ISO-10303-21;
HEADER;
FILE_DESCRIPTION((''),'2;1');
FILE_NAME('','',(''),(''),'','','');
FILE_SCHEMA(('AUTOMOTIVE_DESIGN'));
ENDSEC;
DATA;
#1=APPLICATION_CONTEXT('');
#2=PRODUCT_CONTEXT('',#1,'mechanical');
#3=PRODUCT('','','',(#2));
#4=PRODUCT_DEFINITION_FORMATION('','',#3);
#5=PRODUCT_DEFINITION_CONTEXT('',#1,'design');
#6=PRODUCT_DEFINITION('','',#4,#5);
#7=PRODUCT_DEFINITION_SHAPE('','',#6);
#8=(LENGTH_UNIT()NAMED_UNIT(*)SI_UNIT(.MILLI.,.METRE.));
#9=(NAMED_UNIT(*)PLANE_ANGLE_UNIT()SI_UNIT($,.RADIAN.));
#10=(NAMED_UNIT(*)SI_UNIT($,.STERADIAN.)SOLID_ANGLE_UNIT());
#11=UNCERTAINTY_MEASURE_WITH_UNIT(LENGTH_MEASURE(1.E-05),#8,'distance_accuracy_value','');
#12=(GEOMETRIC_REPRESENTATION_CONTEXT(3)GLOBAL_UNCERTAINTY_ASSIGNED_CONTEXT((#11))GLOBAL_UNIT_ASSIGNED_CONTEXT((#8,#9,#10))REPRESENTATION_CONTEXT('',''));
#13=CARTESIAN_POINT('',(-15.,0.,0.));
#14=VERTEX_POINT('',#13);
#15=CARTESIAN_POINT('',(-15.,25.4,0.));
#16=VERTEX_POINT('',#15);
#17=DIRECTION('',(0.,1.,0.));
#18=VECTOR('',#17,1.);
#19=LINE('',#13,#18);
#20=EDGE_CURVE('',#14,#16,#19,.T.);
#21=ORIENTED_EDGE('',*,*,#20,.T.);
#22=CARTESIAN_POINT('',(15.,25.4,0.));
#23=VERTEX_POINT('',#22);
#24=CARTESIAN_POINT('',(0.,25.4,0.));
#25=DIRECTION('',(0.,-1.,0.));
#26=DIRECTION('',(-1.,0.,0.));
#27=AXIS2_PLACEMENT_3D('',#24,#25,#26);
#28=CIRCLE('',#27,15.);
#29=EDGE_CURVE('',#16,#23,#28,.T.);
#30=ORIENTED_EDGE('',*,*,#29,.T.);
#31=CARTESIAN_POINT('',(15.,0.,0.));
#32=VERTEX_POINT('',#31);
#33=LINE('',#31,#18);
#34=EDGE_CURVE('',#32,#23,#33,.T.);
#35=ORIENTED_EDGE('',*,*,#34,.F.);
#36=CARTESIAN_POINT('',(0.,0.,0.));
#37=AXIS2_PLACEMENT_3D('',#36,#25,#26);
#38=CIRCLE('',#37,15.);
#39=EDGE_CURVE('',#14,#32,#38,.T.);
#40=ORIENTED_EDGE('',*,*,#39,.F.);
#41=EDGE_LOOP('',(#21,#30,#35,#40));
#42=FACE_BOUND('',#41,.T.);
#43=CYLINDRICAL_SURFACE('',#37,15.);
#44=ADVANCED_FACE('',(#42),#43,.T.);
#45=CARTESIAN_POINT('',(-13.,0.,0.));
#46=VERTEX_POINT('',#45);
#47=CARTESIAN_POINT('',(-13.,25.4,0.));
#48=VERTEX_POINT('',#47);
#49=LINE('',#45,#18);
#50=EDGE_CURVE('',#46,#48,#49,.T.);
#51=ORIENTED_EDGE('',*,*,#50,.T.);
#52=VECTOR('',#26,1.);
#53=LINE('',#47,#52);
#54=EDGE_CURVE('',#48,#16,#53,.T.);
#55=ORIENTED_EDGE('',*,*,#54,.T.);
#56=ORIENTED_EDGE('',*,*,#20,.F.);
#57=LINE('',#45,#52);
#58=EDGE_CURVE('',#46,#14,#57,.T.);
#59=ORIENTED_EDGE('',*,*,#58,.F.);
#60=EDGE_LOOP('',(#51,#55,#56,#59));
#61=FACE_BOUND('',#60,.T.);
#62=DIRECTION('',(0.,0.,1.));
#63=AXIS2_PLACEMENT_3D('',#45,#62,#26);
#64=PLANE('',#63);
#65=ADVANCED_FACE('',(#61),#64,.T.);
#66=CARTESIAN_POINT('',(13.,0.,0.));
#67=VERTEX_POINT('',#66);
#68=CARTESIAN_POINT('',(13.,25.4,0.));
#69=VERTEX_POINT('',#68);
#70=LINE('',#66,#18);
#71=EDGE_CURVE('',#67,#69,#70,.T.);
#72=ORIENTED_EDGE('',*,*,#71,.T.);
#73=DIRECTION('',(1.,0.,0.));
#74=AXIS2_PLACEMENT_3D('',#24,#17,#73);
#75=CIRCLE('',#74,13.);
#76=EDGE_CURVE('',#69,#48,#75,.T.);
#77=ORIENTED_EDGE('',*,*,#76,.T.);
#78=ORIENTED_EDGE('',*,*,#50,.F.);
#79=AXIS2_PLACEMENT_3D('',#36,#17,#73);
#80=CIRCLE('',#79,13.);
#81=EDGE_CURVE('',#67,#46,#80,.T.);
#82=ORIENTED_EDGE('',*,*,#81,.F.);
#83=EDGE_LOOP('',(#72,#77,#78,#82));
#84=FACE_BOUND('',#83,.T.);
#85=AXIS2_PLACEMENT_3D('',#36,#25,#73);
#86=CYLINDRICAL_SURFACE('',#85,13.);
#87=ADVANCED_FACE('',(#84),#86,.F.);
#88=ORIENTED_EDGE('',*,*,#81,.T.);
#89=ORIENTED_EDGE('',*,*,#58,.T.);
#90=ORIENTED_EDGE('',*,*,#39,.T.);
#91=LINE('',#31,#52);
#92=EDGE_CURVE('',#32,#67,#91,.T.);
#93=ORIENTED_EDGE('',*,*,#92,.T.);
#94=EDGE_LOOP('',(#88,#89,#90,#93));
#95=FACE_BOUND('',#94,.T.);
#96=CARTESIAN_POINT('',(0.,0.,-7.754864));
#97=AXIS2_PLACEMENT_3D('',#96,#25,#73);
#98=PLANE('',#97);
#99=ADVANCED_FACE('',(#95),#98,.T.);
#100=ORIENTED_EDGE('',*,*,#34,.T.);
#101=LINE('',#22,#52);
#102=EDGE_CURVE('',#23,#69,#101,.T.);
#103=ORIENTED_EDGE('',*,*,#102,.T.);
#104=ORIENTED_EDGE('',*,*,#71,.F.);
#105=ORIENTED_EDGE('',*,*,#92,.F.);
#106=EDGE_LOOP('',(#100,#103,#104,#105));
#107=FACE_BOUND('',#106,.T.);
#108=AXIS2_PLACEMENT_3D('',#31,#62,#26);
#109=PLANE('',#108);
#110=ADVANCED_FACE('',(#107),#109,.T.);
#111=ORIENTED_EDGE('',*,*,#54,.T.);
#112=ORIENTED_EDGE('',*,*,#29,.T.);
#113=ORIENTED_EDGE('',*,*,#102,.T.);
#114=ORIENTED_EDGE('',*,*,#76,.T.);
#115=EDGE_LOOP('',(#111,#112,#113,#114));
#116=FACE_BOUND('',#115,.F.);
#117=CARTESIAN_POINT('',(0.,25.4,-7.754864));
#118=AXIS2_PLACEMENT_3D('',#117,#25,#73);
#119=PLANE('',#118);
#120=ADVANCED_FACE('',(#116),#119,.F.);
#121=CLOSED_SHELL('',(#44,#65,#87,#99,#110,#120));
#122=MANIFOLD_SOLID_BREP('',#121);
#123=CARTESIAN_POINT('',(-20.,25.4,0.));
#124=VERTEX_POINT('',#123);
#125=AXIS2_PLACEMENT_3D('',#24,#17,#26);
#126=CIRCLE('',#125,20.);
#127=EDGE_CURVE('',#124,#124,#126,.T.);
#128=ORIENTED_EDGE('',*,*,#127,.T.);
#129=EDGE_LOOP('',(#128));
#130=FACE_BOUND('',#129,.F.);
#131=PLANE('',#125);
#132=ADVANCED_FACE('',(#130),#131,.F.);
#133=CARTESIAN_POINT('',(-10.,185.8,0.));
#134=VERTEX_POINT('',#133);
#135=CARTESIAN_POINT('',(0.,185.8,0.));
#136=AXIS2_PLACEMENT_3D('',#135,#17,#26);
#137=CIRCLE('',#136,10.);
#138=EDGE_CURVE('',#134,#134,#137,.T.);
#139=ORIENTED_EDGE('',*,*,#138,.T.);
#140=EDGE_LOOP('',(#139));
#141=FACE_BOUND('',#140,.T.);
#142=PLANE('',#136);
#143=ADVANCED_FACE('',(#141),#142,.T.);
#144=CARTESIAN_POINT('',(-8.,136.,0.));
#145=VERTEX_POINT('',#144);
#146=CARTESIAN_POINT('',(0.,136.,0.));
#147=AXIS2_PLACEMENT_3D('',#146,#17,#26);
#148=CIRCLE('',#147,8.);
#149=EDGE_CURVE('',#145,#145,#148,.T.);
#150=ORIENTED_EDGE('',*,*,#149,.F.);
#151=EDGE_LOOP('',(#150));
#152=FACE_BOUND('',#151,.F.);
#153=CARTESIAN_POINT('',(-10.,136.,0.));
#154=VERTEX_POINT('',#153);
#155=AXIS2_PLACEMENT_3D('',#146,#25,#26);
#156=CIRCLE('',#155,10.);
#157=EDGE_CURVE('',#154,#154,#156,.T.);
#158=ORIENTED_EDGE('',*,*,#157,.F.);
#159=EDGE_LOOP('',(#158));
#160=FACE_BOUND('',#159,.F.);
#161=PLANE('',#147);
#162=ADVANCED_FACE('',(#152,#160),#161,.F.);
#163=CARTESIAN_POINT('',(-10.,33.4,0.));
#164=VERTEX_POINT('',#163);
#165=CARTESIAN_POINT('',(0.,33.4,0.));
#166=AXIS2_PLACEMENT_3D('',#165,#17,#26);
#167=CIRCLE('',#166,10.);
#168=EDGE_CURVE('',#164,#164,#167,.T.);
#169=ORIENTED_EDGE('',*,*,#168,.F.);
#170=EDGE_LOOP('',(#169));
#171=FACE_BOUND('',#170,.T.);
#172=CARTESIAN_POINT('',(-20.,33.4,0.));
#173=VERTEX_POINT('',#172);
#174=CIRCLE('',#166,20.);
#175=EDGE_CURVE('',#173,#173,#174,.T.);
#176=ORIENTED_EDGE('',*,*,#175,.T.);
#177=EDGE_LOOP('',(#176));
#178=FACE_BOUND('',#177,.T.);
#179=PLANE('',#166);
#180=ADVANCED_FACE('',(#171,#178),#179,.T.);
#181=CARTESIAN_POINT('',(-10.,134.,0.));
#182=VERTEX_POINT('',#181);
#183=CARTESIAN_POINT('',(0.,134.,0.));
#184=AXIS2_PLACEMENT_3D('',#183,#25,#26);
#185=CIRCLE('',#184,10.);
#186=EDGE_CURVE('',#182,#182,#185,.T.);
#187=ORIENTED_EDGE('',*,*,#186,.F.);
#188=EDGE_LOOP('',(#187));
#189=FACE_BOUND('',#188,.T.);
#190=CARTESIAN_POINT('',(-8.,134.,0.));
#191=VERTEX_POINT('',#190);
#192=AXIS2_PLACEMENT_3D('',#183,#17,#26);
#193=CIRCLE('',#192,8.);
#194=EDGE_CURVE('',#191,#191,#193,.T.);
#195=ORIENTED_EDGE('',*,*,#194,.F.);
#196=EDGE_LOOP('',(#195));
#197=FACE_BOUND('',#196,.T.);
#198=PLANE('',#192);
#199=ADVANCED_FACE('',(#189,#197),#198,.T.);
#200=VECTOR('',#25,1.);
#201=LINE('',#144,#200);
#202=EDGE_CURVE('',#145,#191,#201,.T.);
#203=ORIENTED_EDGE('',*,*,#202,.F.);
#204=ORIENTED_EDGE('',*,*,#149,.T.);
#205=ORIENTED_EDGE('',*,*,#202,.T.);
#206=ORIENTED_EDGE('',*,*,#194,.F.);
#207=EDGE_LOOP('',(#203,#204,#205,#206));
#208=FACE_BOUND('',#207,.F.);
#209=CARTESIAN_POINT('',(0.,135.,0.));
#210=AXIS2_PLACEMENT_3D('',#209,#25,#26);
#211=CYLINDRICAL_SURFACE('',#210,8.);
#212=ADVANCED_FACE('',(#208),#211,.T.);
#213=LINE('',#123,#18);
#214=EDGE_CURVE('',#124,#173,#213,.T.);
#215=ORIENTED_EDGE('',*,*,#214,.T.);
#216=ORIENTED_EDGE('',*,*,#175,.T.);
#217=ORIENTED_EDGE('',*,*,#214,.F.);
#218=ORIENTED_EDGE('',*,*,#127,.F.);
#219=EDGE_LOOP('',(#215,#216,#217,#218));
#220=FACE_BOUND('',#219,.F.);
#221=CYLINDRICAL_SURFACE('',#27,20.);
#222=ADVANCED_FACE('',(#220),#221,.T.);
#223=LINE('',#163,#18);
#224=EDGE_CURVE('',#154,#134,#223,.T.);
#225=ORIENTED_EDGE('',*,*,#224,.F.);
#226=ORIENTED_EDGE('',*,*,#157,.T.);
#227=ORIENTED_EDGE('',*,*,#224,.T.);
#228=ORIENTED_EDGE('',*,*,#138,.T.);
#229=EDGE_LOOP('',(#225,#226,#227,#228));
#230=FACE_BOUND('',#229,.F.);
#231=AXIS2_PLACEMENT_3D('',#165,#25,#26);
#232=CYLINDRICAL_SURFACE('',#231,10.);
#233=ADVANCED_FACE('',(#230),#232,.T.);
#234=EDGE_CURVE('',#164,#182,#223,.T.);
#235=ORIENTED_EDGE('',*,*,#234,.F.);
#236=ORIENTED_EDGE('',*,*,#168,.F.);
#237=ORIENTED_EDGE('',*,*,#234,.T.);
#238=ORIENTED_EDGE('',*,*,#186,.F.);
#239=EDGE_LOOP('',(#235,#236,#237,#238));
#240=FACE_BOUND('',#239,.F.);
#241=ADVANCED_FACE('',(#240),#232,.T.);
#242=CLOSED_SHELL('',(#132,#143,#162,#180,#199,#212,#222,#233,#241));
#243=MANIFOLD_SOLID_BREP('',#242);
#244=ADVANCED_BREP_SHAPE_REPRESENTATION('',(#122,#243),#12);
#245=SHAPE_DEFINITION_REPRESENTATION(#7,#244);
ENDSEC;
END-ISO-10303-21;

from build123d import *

# Parameters (mm, degrees)
F1_DEPTH = 25.4
F2_R     = 20
F3_DEPTH = 8
F4_R     = 10
F5_DEPTH = 152.4
F7_R     = 12.7
F7_R_2   = 8
F8_DEPTH = 1


with BuildPart() as f1:
    # F0 (on Front) → F1 (new body)
    with BuildSketch(Plane.XZ):
        with BuildLine():
            Line((-13, 0), (-15, 0))
            ThreePointArc((-15, 0), (0, -15), (15, 0))
            Line((15, 0), (13, 0))
            ThreePointArc((13, 0), (0, -13), (-13, 0))
        make_face()
    extrude(amount=-F1_DEPTH)


with BuildPart() as f3:
    # F2 (on face) → F3 (new body)
    with BuildSketch(Plane(origin=(0, 25.4, 0), x_dir=(-1, 0, 0), z_dir=(0, 1, 0))):
        Circle(F2_R)
        with BuildLine():
            Line((-15, 0), (-13, 0))
            ThreePointArc((-13, 0), (0, -13), (13, 0))
            Line((13, 0), (15, 0))
            ThreePointArc((15, 0), (0, -15), (-15, 0))
        make_face(mode=Mode.SUBTRACT)
        with BuildLine():
            ThreePointArc((13, 0), (0, -13), (-13, 0))
            Line((-13, 0), (-15, 0))
            ThreePointArc((-15, 0), (0, -15), (15, 0))
            Line((15, 0), (13, 0))
        make_face()
    extrude(amount=F3_DEPTH)

    # F4 (on face) → F5 (join)
    with BuildSketch(Plane(origin=(0, 33.4, 0), x_dir=(-1, 0, 0), z_dir=(0, 1, 0))):
        Circle(F4_R)
    extrude(amount=F5_DEPTH)

    # F7 (on offset) → F8 (cut, symmetric)
    with BuildSketch(Plane(origin=(0, 135, 0), x_dir=(-1, 0, 0), z_dir=(0, 1, 0))):
        Circle(F7_R)
        Circle(F7_R_2, mode=Mode.SUBTRACT)
    extrude(amount=F8_DEPTH, both=True, mode=Mode.SUBTRACT)


solid = Compound([f1.part, f3.part])
